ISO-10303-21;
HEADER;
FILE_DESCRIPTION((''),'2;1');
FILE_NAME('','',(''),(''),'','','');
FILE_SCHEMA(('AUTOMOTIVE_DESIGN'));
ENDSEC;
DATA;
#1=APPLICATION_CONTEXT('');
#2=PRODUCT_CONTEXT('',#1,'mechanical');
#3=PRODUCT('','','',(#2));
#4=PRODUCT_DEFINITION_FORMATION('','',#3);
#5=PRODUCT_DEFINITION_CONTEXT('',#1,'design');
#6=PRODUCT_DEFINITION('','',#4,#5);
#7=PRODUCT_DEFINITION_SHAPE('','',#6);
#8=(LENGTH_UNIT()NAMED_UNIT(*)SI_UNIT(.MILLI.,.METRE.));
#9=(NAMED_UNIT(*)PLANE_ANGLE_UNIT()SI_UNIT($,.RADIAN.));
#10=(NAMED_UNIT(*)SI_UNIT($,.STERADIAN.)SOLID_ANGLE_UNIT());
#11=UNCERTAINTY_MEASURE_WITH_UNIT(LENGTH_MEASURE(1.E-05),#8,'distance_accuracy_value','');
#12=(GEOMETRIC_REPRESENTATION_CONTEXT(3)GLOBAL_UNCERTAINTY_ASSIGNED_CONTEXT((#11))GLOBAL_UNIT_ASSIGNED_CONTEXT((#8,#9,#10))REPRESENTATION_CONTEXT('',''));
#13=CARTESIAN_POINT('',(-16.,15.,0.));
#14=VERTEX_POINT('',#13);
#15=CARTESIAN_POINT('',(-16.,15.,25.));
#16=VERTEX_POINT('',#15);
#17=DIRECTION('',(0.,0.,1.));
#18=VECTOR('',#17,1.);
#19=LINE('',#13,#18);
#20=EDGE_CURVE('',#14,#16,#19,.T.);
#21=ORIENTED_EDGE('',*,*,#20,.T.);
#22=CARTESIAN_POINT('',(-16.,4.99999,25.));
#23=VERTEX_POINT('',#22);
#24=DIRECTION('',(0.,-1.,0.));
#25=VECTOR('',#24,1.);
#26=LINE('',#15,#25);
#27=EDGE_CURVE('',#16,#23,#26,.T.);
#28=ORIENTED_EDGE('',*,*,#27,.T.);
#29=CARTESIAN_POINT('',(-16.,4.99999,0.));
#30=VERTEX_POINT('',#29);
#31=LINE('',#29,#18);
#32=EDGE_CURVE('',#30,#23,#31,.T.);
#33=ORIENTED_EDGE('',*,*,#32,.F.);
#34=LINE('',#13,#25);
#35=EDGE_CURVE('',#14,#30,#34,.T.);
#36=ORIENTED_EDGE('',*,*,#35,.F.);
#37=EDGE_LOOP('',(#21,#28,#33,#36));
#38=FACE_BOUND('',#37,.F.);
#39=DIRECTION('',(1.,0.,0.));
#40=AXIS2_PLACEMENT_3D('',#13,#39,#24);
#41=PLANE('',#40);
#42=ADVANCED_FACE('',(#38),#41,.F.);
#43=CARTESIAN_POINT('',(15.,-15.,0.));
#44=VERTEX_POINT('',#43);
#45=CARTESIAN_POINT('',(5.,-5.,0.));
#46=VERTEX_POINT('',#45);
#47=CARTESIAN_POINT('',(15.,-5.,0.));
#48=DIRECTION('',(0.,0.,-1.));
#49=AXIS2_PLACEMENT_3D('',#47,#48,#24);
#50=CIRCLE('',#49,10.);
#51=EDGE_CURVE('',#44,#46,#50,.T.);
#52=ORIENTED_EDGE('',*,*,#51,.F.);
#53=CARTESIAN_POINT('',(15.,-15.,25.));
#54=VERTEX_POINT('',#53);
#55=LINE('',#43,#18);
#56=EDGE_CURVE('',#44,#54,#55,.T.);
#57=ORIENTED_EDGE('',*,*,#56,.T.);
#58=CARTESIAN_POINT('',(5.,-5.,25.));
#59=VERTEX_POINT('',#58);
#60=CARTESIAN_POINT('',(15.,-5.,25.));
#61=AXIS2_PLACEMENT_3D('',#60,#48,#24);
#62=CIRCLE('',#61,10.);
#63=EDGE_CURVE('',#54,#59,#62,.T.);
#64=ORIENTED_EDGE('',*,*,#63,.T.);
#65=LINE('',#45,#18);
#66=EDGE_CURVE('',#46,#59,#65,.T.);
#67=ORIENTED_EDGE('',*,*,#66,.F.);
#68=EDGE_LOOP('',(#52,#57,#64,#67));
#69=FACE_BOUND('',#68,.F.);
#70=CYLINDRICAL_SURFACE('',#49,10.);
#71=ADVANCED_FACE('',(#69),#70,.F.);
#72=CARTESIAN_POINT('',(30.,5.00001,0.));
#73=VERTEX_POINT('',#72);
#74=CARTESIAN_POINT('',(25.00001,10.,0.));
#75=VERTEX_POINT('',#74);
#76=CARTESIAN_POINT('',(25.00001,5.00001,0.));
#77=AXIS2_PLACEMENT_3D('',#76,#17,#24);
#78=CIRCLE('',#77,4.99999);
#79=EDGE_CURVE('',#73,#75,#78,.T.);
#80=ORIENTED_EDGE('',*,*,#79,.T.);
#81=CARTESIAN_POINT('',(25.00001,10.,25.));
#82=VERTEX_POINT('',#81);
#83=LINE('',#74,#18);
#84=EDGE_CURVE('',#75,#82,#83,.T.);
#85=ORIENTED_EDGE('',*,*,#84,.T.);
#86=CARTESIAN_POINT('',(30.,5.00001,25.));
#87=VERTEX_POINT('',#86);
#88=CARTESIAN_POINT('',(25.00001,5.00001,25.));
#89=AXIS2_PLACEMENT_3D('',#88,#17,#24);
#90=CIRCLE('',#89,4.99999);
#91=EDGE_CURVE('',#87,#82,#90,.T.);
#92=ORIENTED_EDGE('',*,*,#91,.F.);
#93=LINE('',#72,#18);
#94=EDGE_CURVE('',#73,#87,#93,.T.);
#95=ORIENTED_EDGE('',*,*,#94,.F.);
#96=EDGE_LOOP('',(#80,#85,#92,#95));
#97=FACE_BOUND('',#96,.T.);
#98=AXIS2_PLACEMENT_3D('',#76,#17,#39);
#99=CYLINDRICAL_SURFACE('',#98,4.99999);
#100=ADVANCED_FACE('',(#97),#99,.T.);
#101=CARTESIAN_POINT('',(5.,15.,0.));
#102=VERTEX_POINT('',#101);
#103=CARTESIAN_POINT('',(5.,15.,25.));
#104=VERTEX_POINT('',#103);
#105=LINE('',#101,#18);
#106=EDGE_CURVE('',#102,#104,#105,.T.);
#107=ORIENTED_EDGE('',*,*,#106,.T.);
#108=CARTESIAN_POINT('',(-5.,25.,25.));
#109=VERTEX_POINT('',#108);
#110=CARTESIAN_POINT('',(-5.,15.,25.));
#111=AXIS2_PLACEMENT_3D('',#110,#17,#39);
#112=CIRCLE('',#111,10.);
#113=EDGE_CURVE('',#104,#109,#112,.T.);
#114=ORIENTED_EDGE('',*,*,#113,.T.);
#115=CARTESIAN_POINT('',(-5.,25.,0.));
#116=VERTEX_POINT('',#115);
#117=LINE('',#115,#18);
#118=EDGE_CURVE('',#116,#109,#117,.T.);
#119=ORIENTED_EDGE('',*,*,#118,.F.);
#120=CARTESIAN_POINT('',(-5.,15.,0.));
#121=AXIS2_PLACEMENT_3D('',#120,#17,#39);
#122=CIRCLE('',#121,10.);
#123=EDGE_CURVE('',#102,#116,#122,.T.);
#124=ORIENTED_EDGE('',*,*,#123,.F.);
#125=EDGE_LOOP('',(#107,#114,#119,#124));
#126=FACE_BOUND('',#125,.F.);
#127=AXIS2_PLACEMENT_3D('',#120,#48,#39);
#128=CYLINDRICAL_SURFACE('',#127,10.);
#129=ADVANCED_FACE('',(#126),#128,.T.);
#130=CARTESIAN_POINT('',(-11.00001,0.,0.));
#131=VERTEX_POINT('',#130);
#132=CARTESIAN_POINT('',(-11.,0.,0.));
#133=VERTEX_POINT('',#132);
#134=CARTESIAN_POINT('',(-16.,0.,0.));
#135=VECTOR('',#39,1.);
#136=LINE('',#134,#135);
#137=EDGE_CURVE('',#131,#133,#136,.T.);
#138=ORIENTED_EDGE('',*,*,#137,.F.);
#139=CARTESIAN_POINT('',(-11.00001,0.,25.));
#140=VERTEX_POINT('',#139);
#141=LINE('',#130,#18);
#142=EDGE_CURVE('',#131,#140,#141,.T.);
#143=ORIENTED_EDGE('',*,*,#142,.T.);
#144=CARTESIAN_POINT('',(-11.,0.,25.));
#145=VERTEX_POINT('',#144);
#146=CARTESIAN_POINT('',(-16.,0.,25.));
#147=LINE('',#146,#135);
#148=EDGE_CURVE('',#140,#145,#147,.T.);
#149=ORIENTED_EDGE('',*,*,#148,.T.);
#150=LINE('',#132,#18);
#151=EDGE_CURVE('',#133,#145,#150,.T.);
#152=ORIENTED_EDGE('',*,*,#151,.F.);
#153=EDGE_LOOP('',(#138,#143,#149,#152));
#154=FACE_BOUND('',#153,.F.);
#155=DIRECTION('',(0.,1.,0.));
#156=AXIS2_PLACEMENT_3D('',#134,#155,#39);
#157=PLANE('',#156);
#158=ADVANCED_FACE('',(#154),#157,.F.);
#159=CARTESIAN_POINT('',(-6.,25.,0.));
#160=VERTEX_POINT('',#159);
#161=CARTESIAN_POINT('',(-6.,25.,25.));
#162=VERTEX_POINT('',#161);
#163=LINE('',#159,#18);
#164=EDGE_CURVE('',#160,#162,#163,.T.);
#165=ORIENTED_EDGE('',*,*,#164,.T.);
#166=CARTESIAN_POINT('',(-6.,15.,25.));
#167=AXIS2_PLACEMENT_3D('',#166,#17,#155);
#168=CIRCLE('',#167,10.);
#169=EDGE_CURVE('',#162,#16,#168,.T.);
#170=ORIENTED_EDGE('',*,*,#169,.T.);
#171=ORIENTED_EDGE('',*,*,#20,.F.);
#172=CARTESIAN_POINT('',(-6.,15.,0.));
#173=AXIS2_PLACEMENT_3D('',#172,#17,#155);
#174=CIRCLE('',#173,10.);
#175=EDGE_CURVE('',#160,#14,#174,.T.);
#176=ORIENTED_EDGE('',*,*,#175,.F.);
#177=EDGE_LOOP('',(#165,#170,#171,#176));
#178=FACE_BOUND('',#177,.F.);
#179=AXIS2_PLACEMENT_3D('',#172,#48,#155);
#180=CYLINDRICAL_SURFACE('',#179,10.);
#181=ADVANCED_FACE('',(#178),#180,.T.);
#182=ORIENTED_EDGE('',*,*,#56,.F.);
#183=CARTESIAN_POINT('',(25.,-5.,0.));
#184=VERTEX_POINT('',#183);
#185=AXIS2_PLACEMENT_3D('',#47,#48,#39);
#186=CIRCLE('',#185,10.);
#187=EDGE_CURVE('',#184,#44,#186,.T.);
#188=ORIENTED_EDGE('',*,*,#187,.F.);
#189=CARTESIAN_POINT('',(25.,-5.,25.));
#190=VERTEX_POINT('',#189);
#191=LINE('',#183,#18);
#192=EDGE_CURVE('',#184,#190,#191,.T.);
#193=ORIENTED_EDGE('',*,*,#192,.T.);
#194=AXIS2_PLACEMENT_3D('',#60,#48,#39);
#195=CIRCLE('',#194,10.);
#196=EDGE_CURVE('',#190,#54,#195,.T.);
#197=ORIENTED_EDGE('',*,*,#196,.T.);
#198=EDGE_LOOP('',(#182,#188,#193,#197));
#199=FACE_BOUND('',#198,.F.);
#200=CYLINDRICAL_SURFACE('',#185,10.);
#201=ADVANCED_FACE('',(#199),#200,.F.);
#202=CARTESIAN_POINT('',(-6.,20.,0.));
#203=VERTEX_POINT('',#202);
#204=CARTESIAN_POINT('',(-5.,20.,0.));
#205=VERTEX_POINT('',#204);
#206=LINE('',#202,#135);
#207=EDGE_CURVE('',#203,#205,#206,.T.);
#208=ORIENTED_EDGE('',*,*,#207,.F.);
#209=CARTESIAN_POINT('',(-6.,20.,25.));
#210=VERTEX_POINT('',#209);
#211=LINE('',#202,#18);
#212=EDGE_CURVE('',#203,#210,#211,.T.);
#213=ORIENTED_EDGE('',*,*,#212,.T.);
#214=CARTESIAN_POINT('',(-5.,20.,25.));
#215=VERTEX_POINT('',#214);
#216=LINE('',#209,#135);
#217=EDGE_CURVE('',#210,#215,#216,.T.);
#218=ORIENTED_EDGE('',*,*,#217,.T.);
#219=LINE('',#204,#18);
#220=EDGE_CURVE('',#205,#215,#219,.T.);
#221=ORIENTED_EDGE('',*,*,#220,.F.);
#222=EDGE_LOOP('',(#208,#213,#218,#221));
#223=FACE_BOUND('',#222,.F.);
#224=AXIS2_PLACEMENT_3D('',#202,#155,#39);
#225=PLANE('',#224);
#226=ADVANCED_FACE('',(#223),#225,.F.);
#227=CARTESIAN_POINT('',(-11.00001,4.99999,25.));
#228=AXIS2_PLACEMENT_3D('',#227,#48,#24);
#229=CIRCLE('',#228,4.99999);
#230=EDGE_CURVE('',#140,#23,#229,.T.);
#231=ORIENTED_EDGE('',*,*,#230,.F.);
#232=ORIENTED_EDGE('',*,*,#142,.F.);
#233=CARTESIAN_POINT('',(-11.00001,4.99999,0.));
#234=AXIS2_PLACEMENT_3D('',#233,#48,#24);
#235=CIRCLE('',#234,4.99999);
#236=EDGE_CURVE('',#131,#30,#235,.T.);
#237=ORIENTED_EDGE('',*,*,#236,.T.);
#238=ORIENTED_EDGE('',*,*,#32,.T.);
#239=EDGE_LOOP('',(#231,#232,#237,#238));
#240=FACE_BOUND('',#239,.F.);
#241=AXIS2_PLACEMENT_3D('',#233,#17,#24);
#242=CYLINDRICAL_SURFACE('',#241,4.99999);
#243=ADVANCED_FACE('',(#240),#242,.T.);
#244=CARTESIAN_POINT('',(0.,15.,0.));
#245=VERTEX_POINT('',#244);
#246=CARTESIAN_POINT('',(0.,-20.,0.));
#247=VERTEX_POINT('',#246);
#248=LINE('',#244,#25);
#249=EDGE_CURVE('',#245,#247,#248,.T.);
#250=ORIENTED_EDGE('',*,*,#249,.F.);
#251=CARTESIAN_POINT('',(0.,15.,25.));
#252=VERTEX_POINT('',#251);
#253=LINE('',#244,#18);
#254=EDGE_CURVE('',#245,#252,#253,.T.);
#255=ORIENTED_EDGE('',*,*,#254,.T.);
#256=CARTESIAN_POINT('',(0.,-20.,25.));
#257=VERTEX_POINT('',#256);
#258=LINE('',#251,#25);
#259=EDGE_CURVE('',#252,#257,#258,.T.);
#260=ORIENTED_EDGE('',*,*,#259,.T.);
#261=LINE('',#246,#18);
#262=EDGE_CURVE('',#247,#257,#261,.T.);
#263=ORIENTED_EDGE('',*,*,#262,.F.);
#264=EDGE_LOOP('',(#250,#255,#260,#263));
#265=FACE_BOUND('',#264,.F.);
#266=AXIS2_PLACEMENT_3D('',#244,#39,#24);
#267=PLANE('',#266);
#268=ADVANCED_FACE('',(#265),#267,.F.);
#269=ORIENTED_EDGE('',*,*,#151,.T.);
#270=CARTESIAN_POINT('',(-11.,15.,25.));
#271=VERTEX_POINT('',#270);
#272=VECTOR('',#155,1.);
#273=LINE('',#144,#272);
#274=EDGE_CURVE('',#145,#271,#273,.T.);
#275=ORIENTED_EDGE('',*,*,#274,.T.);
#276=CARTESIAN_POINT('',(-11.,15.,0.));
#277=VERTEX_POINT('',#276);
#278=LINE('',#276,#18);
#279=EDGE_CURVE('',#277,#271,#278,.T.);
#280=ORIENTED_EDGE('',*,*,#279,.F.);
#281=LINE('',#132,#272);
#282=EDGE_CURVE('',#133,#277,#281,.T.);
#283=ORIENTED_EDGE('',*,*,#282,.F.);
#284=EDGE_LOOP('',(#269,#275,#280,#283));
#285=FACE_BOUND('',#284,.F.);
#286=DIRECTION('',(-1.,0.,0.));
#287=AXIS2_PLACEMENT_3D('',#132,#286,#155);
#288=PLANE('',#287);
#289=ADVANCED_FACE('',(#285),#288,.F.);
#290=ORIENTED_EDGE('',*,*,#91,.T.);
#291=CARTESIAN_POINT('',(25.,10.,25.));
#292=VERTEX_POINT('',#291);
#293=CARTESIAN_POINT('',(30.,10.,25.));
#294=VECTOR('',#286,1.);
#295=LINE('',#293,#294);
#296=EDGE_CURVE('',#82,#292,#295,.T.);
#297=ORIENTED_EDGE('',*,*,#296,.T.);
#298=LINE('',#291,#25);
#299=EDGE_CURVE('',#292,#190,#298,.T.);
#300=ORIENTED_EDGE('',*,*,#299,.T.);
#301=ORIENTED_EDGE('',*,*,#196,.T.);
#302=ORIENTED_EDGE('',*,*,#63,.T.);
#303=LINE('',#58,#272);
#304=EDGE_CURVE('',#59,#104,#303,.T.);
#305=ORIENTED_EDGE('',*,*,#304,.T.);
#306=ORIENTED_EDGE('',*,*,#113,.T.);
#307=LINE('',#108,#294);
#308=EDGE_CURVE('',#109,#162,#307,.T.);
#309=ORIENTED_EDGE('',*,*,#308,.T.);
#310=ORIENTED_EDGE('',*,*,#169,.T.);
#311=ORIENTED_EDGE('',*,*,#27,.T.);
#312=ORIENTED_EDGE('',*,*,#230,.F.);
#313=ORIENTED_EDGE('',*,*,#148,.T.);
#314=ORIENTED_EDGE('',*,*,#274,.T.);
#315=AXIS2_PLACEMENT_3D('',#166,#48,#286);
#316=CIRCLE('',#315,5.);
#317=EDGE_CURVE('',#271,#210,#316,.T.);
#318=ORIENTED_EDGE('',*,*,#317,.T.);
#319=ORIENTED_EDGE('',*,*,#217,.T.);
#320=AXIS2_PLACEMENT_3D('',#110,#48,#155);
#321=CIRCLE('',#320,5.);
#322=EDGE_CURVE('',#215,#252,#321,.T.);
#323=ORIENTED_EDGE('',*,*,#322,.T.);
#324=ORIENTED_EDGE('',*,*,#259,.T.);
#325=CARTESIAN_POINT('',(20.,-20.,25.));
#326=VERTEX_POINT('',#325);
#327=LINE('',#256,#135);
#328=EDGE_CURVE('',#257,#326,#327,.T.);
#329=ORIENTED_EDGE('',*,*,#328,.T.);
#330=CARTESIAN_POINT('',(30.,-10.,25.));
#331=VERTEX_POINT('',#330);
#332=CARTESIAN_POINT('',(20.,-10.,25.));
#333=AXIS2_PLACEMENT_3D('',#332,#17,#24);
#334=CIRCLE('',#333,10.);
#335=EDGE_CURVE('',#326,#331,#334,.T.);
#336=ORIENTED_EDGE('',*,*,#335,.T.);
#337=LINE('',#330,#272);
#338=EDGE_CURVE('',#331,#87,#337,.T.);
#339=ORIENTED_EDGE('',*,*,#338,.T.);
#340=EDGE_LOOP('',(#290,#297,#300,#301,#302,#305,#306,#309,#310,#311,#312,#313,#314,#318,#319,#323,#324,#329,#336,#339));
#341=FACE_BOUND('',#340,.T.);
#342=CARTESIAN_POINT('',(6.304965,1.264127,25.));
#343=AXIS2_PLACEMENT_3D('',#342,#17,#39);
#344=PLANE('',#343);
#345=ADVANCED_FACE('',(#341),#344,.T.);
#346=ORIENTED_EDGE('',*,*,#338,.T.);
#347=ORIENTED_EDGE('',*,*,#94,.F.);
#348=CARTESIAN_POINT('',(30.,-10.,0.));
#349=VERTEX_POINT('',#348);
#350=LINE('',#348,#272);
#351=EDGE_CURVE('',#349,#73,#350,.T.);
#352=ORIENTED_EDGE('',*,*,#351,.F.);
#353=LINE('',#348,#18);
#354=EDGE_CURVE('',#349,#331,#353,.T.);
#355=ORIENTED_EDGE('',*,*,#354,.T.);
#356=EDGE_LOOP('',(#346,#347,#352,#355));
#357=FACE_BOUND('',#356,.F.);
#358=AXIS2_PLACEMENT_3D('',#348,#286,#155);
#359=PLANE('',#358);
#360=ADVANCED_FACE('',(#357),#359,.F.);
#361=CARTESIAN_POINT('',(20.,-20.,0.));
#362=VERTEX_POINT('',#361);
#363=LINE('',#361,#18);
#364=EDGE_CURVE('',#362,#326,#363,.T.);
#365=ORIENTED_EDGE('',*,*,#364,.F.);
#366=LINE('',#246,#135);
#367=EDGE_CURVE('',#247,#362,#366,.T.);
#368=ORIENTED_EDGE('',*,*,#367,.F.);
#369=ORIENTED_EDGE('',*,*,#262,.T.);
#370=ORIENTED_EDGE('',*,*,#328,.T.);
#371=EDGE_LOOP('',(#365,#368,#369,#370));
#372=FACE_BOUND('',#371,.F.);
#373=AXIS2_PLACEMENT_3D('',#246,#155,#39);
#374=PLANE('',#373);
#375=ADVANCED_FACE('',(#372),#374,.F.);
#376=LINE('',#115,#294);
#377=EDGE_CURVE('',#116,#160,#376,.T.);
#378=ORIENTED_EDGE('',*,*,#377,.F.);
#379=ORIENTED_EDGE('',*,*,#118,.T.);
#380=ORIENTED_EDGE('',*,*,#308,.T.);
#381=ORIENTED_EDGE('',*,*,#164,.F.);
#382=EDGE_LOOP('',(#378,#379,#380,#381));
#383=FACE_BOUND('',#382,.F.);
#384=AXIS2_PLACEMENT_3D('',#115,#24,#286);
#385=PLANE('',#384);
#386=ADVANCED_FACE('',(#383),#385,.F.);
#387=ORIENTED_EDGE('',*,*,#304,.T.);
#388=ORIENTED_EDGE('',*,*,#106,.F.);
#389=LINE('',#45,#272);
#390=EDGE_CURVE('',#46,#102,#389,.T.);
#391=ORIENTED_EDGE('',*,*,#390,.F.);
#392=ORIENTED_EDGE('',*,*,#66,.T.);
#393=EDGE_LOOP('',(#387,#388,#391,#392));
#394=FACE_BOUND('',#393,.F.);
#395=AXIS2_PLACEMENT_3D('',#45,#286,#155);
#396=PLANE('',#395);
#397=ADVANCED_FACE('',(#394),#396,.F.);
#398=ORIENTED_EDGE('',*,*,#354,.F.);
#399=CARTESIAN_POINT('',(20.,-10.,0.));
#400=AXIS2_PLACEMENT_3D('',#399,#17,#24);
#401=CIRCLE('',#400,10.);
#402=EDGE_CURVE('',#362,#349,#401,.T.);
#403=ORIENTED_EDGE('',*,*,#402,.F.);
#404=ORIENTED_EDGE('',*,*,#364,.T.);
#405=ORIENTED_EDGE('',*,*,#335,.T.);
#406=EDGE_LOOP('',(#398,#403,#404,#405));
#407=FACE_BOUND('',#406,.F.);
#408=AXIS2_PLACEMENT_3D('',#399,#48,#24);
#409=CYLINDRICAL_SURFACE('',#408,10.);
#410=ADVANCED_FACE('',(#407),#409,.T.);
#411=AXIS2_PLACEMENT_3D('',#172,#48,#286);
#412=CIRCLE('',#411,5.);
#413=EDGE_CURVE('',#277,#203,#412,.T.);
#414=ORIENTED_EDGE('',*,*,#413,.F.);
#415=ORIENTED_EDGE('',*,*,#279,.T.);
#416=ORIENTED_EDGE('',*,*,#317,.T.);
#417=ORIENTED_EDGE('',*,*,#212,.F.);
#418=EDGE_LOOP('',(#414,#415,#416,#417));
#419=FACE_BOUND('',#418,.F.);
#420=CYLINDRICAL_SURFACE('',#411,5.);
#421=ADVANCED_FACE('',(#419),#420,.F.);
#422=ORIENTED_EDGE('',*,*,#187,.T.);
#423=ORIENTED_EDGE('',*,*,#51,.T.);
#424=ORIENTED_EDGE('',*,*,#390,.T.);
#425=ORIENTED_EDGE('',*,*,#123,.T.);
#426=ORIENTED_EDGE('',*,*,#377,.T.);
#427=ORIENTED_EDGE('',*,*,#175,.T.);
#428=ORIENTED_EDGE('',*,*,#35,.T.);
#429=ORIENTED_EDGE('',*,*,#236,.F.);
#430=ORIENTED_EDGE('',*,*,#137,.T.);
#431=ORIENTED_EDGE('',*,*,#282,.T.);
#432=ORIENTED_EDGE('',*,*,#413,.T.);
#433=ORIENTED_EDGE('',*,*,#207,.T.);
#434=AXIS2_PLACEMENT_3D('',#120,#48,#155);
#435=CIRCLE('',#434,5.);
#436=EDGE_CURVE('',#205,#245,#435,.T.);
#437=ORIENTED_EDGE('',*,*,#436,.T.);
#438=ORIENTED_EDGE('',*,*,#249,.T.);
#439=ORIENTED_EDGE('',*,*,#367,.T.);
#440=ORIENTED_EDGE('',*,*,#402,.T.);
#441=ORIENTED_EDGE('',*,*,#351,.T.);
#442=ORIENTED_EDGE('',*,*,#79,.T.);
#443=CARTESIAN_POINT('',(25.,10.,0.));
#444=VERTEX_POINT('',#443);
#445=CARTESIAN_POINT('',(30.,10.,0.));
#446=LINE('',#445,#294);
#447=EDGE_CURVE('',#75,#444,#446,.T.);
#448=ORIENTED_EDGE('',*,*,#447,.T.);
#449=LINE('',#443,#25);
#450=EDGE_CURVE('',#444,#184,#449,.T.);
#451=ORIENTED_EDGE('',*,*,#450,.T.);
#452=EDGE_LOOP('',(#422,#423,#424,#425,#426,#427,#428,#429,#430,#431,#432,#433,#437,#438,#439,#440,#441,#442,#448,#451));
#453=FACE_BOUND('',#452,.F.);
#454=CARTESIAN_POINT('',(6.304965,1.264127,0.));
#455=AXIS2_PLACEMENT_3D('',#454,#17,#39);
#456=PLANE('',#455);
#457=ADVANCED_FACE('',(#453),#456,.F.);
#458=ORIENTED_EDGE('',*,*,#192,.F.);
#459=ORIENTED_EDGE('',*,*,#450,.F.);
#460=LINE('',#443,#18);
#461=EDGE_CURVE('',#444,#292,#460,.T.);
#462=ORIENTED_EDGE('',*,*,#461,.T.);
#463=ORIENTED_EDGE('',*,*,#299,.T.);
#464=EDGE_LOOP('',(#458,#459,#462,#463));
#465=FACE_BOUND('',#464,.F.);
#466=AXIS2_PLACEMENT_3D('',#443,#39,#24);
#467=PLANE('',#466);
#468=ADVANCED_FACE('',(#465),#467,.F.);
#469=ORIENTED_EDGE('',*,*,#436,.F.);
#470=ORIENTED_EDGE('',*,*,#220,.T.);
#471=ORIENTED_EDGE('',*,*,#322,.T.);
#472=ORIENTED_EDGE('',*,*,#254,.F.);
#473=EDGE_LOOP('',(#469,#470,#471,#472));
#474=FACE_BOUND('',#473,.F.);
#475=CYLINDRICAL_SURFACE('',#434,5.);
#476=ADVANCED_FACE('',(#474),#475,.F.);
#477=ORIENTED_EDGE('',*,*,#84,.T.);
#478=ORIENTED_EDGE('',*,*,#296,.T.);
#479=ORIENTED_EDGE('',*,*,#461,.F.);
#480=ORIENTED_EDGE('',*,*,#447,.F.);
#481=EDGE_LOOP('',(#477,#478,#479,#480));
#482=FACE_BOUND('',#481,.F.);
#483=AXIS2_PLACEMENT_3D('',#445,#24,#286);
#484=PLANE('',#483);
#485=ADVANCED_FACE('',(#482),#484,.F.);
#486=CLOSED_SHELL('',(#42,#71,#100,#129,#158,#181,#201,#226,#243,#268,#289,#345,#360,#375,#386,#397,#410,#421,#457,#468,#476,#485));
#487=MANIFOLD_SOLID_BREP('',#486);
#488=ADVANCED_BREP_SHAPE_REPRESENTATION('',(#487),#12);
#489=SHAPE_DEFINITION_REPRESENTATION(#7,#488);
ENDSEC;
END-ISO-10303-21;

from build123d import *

# Parameters (mm, degrees)
F1_DEPTH = 25
F2_R     = 4.99999
F3_R     = 4.99999


# Not quite as in the source:
# - a fillet or chamfer is up to 0.001 mm smaller than in the source, because OpenCascade refuses the exact size


with BuildPart() as f1:
    # F0 (on Top) → F1 (new body)
    with BuildSketch(Plane.XY):
        with BuildLine():
            Line((-16, 0), (-11, 0))
            Line((-11, 0), (-11, 15))
            ThreePointArc((-11, 15), (-9.5355339059, 18.5355339059), (-6, 20))
            Line((-6, 20), (-5, 20))
            ThreePointArc((-5, 20), (-1.4644660941, 18.5355339059), (0, 15))
            Line((0, 15), (0, -20))
            Line((0, -20), (20, -20))
            ThreePointArc((20, -20), (27.0710678119, -17.0710678119), (30, -10))
            Line((30, -10), (30, 10))
            Line((30, 10), (25, 10))
            Line((25, 10), (25, -1.100000754))
            Line((25, -1.100000754), (25, -5))
            ThreePointArc((25, -5), (22.0710678119, -12.0710678119), (15, -15))
            ThreePointArc((15, -15), (7.9289321881, -12.0710678119), (5, -5))
            Line((5, -5), (5, 15))
            ThreePointArc((5, 15), (2.0710678119, 22.0710678119), (-5, 25))
            Line((-5, 25), (-6, 25))
            ThreePointArc((-6, 25), (-13.0710678119, 22.0710678119), (-16, 15))
            Line((-16, 15), (-16, 0))
        make_face()
    extrude(amount=F1_DEPTH)

    # F2 (radius 5 in the source; OpenCascade refuses exactly that, so slightly less here)
    f2_edges = [f1.edges().sort_by_distance(p)[0] for p in [
        (30, 10, 12.5),
    ]]
    fillet(f2_edges, radius=F2_R)

    # F3 (radius 5 in the source; OpenCascade refuses exactly that, so slightly less here)
    f3_edges = [f1.edges().sort_by_distance(p)[0] for p in [
        (-16, 0, 12.5),
    ]]
    fillet(f3_edges, radius=F3_R)


solid = f1.part
